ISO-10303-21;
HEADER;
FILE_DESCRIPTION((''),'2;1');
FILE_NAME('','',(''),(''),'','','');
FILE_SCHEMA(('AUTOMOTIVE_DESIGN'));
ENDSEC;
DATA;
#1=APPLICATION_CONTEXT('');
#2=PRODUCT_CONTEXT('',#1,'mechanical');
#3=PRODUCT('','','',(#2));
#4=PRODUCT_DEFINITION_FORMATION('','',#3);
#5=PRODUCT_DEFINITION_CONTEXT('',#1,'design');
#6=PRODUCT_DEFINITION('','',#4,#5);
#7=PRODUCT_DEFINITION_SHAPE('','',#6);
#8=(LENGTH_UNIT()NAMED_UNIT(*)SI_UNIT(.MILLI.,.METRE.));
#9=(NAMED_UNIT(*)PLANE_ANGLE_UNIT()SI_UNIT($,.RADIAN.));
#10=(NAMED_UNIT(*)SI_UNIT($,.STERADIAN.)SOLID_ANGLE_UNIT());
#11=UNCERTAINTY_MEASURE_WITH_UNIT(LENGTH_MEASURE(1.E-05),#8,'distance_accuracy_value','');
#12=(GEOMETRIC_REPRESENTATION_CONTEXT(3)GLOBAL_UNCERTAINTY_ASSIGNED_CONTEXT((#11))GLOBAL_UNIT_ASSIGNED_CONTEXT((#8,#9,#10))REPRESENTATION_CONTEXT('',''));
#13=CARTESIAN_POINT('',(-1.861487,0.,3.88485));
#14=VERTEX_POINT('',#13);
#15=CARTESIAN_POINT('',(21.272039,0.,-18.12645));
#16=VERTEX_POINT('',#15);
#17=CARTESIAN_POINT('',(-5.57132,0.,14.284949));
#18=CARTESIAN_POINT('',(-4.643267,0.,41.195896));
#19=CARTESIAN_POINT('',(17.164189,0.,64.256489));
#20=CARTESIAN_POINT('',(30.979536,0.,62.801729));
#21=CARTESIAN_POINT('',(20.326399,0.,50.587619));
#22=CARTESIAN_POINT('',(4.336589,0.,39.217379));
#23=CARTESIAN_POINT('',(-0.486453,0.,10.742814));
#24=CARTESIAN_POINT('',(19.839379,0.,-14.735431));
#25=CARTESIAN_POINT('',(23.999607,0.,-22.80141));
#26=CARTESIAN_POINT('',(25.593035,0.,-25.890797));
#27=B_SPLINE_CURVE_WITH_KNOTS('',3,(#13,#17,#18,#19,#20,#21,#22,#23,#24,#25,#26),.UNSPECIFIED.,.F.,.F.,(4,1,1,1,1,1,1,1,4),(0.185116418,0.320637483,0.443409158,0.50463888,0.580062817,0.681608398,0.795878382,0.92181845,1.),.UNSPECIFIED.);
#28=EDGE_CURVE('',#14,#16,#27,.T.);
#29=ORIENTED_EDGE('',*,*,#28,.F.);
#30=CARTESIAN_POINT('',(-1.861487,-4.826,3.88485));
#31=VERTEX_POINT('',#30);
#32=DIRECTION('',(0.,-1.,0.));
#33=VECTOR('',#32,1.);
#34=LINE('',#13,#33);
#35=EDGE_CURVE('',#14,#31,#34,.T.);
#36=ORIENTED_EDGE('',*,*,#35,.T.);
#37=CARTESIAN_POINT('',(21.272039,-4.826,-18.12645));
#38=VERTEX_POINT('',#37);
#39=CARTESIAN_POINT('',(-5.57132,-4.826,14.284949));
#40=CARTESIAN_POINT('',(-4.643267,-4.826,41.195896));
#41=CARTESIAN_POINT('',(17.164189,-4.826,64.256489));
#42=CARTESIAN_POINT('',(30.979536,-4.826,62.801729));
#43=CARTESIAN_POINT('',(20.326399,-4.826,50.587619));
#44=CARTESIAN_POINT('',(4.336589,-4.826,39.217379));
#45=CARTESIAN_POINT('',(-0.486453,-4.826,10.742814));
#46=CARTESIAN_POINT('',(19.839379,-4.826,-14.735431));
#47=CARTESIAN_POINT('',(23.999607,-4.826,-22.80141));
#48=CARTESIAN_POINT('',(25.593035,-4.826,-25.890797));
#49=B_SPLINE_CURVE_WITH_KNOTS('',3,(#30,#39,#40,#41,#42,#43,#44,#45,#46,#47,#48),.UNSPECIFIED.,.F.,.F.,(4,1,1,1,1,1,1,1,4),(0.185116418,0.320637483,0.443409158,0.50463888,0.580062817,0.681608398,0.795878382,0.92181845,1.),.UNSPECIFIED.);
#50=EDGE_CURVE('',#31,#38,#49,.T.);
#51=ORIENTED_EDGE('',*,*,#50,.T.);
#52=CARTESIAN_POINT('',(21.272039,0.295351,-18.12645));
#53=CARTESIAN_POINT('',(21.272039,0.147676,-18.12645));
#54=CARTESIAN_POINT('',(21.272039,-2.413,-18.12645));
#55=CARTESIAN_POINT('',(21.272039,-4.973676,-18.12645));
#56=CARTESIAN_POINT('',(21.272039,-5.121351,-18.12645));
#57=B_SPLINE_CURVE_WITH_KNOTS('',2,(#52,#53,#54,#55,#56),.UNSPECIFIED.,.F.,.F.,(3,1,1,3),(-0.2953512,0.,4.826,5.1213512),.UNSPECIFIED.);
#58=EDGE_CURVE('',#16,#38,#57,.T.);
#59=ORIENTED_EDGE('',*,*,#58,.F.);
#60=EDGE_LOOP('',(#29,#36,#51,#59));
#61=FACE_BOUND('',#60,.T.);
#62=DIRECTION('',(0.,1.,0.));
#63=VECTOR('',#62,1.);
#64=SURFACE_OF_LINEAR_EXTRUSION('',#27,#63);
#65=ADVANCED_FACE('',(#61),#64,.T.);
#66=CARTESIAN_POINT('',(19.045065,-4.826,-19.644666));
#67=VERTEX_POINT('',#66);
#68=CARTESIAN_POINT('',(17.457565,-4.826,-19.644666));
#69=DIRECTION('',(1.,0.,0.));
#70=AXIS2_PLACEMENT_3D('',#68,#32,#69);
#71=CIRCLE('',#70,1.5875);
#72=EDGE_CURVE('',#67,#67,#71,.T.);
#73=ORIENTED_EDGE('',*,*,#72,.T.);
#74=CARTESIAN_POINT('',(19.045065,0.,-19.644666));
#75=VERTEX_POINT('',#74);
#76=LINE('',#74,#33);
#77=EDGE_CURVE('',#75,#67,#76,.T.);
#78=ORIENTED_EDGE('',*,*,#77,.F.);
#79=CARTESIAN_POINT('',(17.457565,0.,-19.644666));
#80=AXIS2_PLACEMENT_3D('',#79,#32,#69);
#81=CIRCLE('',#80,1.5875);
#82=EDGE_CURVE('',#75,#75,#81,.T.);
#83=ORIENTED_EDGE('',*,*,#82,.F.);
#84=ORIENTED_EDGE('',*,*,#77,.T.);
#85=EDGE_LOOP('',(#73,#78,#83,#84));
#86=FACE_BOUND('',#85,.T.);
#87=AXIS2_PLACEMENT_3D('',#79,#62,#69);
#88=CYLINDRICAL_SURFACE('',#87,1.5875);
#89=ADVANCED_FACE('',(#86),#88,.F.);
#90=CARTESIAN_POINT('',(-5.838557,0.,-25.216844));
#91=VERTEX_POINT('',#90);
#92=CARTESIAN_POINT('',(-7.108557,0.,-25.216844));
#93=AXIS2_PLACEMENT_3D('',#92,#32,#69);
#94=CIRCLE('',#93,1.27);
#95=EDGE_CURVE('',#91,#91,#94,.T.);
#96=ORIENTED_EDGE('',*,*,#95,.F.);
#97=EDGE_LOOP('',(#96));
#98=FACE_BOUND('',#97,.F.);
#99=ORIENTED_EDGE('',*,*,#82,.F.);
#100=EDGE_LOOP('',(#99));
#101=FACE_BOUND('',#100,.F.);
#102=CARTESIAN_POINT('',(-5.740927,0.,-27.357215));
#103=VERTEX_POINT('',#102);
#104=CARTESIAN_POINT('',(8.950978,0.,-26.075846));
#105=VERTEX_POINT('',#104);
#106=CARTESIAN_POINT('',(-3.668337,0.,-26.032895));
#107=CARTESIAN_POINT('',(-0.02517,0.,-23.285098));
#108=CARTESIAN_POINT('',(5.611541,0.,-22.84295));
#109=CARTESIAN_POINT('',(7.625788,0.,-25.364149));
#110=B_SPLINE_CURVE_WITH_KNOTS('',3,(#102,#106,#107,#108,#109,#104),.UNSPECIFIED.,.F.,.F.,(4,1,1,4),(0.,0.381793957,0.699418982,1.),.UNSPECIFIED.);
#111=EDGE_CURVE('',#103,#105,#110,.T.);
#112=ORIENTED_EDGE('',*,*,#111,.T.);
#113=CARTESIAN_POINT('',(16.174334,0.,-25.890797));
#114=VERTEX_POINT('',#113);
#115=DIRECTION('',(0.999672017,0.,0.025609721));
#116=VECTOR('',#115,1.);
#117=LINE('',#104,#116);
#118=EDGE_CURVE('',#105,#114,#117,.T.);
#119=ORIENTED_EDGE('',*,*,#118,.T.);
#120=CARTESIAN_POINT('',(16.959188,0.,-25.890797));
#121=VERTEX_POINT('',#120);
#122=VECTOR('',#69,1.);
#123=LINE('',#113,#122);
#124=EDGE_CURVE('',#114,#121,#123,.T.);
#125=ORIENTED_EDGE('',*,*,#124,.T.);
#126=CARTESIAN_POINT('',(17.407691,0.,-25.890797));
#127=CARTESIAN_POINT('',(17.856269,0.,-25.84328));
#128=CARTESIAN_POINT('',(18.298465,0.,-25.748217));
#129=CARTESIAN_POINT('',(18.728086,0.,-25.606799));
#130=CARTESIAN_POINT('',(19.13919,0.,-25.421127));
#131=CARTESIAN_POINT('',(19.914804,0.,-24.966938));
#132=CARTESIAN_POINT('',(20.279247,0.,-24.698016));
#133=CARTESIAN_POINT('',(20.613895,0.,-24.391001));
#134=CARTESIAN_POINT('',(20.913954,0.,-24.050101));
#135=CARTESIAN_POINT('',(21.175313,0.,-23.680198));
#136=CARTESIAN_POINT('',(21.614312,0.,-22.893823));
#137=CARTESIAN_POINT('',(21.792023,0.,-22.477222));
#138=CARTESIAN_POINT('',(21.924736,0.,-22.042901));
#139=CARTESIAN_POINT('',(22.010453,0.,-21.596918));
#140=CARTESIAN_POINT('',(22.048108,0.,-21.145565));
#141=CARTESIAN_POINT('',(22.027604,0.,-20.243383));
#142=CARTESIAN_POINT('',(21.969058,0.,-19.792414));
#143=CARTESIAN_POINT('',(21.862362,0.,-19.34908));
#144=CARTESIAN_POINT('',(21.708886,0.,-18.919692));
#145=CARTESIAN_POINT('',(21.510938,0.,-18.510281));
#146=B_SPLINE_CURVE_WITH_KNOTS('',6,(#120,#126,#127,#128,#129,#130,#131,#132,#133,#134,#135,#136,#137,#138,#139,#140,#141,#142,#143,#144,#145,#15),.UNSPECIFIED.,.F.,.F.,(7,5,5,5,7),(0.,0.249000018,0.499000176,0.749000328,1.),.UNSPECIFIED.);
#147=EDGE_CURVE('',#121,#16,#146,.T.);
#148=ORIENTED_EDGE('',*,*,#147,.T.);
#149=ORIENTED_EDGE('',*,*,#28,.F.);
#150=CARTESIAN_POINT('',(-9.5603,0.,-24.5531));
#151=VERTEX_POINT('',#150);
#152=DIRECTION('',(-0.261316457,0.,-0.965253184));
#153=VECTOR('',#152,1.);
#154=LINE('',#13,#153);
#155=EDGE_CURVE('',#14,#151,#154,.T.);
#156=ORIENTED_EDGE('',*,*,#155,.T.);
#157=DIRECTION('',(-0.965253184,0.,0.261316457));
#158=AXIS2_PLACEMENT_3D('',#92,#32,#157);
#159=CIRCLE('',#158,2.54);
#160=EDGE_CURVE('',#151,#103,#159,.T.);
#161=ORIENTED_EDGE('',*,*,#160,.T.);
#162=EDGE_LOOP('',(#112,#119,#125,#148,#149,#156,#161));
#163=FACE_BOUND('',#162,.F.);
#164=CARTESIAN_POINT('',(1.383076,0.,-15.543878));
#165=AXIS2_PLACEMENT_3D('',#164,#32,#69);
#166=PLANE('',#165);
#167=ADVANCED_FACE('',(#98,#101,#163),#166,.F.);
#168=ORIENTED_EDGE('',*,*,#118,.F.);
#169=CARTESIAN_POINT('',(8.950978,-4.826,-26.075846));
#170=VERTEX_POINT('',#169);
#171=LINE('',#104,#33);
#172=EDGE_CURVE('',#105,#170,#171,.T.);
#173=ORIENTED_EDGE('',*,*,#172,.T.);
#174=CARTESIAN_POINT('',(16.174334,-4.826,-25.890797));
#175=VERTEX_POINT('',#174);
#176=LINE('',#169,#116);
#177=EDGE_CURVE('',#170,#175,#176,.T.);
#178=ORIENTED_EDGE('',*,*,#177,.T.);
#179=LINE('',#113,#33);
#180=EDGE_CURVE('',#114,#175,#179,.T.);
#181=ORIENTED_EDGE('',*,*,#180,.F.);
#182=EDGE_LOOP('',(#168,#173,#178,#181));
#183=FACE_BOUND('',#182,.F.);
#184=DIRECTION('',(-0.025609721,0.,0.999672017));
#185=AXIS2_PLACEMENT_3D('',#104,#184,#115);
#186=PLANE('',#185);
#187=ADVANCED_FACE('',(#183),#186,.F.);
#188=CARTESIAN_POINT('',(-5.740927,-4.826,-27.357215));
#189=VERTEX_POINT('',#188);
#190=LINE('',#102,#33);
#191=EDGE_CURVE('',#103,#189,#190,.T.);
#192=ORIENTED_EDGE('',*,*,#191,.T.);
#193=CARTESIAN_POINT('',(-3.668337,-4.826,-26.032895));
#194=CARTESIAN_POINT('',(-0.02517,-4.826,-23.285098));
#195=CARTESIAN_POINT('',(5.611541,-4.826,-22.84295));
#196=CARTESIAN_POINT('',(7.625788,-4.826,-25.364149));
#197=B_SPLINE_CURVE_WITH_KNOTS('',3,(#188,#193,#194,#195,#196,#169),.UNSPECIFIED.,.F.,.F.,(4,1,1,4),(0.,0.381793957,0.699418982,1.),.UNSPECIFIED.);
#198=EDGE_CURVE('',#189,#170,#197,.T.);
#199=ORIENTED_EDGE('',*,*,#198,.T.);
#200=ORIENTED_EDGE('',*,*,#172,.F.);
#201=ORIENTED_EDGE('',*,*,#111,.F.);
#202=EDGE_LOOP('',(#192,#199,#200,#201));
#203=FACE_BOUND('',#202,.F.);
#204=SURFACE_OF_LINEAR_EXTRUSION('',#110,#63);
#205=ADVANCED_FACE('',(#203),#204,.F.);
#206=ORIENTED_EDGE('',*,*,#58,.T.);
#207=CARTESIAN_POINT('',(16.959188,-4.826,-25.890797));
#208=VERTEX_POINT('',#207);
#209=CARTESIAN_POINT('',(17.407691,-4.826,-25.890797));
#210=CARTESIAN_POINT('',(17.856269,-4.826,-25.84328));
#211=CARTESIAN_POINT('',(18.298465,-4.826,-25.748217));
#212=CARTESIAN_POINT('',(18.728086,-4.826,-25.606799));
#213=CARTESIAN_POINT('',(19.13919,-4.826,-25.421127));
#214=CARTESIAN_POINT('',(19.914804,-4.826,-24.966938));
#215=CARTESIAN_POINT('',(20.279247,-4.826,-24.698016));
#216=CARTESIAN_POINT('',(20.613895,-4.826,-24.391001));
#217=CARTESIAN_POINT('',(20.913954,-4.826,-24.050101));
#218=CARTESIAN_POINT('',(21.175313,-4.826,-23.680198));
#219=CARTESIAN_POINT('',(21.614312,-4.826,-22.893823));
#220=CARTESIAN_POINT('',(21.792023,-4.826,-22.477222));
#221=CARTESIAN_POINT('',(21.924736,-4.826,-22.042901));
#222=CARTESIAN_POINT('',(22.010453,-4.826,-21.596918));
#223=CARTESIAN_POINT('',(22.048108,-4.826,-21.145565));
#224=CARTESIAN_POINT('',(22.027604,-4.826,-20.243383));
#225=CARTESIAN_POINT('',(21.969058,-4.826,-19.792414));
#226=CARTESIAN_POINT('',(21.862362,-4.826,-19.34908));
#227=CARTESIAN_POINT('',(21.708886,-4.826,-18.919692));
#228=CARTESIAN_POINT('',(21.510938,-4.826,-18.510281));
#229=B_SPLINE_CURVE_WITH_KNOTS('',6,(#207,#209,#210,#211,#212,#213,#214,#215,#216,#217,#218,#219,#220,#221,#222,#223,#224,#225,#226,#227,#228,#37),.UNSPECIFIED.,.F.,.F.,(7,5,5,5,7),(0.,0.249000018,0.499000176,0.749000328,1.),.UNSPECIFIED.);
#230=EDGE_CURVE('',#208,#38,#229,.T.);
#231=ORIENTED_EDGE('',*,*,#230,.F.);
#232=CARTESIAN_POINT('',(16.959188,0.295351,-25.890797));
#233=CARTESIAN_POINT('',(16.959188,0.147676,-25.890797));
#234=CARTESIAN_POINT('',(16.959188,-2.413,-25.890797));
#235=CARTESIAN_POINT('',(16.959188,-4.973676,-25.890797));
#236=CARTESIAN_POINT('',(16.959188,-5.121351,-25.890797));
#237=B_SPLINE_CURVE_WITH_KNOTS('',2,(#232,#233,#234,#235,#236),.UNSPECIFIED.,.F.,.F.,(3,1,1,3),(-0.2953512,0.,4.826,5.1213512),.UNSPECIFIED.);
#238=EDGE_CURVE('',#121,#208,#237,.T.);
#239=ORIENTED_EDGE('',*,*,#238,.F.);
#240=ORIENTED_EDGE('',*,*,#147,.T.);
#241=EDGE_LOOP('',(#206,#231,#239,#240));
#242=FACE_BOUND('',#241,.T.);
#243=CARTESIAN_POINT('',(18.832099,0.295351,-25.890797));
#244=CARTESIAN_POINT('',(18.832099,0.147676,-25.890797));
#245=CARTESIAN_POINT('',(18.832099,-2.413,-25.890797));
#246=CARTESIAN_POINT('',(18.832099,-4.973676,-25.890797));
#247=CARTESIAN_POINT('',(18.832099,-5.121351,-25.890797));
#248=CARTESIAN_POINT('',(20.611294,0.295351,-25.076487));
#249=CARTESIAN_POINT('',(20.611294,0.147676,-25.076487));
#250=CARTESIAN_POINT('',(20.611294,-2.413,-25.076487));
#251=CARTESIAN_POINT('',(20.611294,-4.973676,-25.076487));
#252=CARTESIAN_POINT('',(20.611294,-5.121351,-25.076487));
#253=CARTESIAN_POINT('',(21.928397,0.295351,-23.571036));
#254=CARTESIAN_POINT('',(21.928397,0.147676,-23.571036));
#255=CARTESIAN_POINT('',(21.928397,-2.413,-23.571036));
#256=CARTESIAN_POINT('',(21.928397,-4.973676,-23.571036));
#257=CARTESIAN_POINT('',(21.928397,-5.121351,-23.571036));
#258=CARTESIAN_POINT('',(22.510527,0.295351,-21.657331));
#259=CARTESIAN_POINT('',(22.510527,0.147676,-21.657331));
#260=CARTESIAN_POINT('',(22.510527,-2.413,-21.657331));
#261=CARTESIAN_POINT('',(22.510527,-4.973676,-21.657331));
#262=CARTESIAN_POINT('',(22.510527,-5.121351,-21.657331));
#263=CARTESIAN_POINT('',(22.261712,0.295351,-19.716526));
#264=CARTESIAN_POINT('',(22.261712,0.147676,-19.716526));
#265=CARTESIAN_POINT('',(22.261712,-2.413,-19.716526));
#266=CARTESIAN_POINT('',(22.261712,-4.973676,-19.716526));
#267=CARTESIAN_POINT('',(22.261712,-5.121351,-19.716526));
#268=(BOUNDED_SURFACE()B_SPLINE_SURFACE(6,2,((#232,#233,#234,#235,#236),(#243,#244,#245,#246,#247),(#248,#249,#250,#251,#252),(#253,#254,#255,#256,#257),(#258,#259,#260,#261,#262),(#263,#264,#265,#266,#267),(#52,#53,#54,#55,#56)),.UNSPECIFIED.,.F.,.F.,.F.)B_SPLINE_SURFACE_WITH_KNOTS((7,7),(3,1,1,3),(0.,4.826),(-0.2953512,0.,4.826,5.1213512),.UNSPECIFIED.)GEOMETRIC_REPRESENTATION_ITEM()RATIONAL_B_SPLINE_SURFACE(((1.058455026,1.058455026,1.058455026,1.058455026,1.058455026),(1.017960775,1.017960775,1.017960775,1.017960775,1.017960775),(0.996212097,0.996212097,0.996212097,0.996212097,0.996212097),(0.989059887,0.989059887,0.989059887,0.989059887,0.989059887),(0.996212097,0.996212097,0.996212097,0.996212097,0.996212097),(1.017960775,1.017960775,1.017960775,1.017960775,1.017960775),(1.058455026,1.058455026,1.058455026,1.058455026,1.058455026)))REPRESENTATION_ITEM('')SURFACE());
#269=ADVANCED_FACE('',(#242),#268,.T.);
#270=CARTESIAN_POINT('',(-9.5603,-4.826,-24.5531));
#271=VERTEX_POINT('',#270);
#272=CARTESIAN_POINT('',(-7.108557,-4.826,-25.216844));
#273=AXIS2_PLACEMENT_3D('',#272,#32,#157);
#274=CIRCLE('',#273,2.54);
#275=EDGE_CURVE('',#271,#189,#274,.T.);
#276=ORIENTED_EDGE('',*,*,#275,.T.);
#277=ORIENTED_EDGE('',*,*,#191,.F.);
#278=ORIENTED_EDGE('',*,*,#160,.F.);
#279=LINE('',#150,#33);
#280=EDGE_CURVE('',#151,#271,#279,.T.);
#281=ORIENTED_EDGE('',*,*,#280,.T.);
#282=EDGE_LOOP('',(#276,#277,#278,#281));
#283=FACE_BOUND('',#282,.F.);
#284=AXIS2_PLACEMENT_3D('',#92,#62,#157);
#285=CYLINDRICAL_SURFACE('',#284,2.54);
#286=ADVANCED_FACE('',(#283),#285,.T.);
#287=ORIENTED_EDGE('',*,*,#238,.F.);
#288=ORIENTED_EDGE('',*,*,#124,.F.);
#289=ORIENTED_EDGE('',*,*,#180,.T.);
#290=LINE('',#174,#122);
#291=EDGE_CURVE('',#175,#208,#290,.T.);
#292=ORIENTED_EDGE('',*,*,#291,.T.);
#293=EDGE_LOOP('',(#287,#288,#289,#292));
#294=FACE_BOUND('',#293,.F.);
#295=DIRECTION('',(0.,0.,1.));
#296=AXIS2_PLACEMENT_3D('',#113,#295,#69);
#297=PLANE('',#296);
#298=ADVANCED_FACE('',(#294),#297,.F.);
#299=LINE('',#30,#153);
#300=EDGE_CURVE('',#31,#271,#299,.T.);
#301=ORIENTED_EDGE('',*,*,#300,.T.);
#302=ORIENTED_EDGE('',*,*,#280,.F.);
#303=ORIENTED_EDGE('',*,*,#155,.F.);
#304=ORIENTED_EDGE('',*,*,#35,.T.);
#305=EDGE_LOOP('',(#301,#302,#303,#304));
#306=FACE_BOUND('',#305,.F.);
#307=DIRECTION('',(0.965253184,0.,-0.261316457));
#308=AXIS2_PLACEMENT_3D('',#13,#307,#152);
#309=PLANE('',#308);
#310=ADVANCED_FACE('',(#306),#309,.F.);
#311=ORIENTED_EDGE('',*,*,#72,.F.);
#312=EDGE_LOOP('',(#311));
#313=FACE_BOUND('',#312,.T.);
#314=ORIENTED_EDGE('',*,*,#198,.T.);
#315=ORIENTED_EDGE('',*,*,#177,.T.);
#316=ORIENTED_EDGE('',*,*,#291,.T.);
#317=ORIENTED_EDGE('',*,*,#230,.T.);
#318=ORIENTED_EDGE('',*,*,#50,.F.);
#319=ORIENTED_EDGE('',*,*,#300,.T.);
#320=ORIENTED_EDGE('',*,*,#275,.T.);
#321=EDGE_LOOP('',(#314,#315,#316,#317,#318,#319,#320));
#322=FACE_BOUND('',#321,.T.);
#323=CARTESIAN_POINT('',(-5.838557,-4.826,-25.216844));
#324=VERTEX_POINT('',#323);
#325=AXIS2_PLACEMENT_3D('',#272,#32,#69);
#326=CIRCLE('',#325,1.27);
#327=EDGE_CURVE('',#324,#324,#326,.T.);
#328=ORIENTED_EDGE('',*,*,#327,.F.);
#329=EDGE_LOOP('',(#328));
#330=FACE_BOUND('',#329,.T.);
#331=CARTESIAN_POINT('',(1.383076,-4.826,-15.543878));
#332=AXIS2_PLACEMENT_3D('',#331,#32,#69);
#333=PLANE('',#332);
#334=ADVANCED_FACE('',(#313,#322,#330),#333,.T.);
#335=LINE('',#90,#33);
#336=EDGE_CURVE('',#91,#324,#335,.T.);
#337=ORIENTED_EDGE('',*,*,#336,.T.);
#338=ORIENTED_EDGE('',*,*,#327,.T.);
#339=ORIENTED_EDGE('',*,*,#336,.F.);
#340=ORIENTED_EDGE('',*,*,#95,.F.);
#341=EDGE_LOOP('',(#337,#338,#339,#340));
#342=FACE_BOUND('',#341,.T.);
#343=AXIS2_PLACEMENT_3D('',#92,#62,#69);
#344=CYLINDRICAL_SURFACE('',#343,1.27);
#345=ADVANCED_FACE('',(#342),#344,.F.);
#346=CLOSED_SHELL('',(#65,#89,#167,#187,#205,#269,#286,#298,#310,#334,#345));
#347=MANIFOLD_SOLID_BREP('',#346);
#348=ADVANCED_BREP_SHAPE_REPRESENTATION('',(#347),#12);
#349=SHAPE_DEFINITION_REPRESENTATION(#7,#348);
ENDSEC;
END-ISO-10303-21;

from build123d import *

# Parameters (mm, degrees)
F0_R     = 1.27
F0_R_2   = 1.5875
F1_DEPTH = 4.826
F2_R     = 5.08


with BuildPart() as f1:
    # F0 (on Front) → F1 (new body)
    with BuildSketch(Plane.XZ):
        with BuildLine():
            add(Edge.make_bspline(
                [(-5.7409273062, -27.357215091), (-3.6683374093, -26.0328951082), (-0.0251701264, -23.2850982777), (5.6115406498, -22.8429500303), (7.6257882882, -25.3641492448), (8.9509775862, -26.0758455843)],
                knots=[0, 0, 0, 0, 0.3817939574, 0.6994189819, 1, 1, 1, 1], degree=3))
            Line((8.9509775862, -26.0758455843), (16.1743344595, -25.8907967367))
            add(Edge.make_bspline(
                [(16.1743344595, -25.8907967367), (14.5463270907, -22.5263236355), (12.9183197219, -19.1618505343), (10.2751832414, -15.4096915571)],
                knots=[0, 0, 0, 0, 0.077888926, 0.077888926, 0.077888926, 0.077888926], degree=3))
            add(Edge.make_bspline(
                [(10.2751832414, -15.4096915571), (6.6364516561, -10.2441999209), (1.0738216148, -4.3439561733), (-1.8614867632, 3.8848498313)],
                knots=[0.077888926, 0.077888926, 0.077888926, 0.077888926, 0.1851164178, 0.1851164178, 0.1851164178, 0.1851164178], degree=3))
            Line((-1.8614867632, 3.8848498313), (-9.560300399, -24.553100254))
            ThreePointArc((-9.560300399, -24.553100254), (-6.7737644216, -22.6990049585), (-4.5685573119, -25.216844056))
            ThreePointArc((-4.5685573119, -25.216844056), (-4.8808477017, -26.4370530106), (-5.7409273062, -27.357215091))
        make_face()
        with BuildLine():
            ThreePointArc((-9.560300399, -24.553100254), (-8.6117506787, -27.264283848), (-5.7409273062, -27.357215091))
            ThreePointArc((-5.7409273062, -27.357215091), (-4.8808477017, -26.4370530106), (-4.5685573119, -25.216844056))
            ThreePointArc((-4.5685573119, -25.216844056), (-6.7737644216, -22.6990049585), (-9.560300399, -24.553100254))
        make_face()
        with Locations((-7.1085573119, -25.216844056)):
            Circle(F0_R, mode=Mode.SUBTRACT)
        with BuildLine():
            add(Edge.make_bspline(
                [(16.1743344595, -25.8907967367), (14.5463270907, -22.5263236355), (12.9183197219, -19.1618505343), (10.2751832414, -15.4096915571)],
                knots=[0, 0, 0, 0, 0.077888926, 0.077888926, 0.077888926, 0.077888926], degree=3))
            Line((16.1743344595, -25.8907967367), (25.5930349231, -25.8907967367))
            add(Edge.make_bspline(
                [(-1.8614867632, 3.8848498313), (-5.5713200583, 14.284949093), (-4.6432671747, 41.195895922), (17.1641890949, 64.2564894171), (30.9795358991, 62.8017285805), (20.3263989801, 50.5876190519), (4.3365893948, 39.2173794204), (-0.4864534789, 10.7428135064), (19.8393789476, -14.7354313612), (23.9996070336, -22.8014096788), (25.5930349231, -25.8907967367)],
                knots=[0.1851164178, 0.1851164178, 0.1851164178, 0.1851164178, 0.3206374834, 0.4434091583, 0.50463888, 0.5800628175, 0.6816083979, 0.7958783822, 0.9218184504, 1, 1, 1, 1], degree=3))
            add(Edge.make_bspline(
                [(10.2751832414, -15.4096915571), (6.6364516561, -10.2441999209), (1.0738216148, -4.3439561733), (-1.8614867632, 3.8848498313)],
                knots=[0.077888926, 0.077888926, 0.077888926, 0.077888926, 0.1851164178, 0.1851164178, 0.1851164178, 0.1851164178], degree=3))
        make_face()
        with Locations((17.4575652927, -19.6446664631)):
            Circle(F0_R_2, mode=Mode.SUBTRACT)
    extrude(amount=F1_DEPTH)

    # F2
    f2_edges = [f1.edges().sort_by_distance(p)[0] for p in [
        (16.174334, -2.413, -25.890797),
        (25.593035, -2.413, -25.890797),
    ]]
    fillet(f2_edges, radius=F2_R)


solid = f1.part
